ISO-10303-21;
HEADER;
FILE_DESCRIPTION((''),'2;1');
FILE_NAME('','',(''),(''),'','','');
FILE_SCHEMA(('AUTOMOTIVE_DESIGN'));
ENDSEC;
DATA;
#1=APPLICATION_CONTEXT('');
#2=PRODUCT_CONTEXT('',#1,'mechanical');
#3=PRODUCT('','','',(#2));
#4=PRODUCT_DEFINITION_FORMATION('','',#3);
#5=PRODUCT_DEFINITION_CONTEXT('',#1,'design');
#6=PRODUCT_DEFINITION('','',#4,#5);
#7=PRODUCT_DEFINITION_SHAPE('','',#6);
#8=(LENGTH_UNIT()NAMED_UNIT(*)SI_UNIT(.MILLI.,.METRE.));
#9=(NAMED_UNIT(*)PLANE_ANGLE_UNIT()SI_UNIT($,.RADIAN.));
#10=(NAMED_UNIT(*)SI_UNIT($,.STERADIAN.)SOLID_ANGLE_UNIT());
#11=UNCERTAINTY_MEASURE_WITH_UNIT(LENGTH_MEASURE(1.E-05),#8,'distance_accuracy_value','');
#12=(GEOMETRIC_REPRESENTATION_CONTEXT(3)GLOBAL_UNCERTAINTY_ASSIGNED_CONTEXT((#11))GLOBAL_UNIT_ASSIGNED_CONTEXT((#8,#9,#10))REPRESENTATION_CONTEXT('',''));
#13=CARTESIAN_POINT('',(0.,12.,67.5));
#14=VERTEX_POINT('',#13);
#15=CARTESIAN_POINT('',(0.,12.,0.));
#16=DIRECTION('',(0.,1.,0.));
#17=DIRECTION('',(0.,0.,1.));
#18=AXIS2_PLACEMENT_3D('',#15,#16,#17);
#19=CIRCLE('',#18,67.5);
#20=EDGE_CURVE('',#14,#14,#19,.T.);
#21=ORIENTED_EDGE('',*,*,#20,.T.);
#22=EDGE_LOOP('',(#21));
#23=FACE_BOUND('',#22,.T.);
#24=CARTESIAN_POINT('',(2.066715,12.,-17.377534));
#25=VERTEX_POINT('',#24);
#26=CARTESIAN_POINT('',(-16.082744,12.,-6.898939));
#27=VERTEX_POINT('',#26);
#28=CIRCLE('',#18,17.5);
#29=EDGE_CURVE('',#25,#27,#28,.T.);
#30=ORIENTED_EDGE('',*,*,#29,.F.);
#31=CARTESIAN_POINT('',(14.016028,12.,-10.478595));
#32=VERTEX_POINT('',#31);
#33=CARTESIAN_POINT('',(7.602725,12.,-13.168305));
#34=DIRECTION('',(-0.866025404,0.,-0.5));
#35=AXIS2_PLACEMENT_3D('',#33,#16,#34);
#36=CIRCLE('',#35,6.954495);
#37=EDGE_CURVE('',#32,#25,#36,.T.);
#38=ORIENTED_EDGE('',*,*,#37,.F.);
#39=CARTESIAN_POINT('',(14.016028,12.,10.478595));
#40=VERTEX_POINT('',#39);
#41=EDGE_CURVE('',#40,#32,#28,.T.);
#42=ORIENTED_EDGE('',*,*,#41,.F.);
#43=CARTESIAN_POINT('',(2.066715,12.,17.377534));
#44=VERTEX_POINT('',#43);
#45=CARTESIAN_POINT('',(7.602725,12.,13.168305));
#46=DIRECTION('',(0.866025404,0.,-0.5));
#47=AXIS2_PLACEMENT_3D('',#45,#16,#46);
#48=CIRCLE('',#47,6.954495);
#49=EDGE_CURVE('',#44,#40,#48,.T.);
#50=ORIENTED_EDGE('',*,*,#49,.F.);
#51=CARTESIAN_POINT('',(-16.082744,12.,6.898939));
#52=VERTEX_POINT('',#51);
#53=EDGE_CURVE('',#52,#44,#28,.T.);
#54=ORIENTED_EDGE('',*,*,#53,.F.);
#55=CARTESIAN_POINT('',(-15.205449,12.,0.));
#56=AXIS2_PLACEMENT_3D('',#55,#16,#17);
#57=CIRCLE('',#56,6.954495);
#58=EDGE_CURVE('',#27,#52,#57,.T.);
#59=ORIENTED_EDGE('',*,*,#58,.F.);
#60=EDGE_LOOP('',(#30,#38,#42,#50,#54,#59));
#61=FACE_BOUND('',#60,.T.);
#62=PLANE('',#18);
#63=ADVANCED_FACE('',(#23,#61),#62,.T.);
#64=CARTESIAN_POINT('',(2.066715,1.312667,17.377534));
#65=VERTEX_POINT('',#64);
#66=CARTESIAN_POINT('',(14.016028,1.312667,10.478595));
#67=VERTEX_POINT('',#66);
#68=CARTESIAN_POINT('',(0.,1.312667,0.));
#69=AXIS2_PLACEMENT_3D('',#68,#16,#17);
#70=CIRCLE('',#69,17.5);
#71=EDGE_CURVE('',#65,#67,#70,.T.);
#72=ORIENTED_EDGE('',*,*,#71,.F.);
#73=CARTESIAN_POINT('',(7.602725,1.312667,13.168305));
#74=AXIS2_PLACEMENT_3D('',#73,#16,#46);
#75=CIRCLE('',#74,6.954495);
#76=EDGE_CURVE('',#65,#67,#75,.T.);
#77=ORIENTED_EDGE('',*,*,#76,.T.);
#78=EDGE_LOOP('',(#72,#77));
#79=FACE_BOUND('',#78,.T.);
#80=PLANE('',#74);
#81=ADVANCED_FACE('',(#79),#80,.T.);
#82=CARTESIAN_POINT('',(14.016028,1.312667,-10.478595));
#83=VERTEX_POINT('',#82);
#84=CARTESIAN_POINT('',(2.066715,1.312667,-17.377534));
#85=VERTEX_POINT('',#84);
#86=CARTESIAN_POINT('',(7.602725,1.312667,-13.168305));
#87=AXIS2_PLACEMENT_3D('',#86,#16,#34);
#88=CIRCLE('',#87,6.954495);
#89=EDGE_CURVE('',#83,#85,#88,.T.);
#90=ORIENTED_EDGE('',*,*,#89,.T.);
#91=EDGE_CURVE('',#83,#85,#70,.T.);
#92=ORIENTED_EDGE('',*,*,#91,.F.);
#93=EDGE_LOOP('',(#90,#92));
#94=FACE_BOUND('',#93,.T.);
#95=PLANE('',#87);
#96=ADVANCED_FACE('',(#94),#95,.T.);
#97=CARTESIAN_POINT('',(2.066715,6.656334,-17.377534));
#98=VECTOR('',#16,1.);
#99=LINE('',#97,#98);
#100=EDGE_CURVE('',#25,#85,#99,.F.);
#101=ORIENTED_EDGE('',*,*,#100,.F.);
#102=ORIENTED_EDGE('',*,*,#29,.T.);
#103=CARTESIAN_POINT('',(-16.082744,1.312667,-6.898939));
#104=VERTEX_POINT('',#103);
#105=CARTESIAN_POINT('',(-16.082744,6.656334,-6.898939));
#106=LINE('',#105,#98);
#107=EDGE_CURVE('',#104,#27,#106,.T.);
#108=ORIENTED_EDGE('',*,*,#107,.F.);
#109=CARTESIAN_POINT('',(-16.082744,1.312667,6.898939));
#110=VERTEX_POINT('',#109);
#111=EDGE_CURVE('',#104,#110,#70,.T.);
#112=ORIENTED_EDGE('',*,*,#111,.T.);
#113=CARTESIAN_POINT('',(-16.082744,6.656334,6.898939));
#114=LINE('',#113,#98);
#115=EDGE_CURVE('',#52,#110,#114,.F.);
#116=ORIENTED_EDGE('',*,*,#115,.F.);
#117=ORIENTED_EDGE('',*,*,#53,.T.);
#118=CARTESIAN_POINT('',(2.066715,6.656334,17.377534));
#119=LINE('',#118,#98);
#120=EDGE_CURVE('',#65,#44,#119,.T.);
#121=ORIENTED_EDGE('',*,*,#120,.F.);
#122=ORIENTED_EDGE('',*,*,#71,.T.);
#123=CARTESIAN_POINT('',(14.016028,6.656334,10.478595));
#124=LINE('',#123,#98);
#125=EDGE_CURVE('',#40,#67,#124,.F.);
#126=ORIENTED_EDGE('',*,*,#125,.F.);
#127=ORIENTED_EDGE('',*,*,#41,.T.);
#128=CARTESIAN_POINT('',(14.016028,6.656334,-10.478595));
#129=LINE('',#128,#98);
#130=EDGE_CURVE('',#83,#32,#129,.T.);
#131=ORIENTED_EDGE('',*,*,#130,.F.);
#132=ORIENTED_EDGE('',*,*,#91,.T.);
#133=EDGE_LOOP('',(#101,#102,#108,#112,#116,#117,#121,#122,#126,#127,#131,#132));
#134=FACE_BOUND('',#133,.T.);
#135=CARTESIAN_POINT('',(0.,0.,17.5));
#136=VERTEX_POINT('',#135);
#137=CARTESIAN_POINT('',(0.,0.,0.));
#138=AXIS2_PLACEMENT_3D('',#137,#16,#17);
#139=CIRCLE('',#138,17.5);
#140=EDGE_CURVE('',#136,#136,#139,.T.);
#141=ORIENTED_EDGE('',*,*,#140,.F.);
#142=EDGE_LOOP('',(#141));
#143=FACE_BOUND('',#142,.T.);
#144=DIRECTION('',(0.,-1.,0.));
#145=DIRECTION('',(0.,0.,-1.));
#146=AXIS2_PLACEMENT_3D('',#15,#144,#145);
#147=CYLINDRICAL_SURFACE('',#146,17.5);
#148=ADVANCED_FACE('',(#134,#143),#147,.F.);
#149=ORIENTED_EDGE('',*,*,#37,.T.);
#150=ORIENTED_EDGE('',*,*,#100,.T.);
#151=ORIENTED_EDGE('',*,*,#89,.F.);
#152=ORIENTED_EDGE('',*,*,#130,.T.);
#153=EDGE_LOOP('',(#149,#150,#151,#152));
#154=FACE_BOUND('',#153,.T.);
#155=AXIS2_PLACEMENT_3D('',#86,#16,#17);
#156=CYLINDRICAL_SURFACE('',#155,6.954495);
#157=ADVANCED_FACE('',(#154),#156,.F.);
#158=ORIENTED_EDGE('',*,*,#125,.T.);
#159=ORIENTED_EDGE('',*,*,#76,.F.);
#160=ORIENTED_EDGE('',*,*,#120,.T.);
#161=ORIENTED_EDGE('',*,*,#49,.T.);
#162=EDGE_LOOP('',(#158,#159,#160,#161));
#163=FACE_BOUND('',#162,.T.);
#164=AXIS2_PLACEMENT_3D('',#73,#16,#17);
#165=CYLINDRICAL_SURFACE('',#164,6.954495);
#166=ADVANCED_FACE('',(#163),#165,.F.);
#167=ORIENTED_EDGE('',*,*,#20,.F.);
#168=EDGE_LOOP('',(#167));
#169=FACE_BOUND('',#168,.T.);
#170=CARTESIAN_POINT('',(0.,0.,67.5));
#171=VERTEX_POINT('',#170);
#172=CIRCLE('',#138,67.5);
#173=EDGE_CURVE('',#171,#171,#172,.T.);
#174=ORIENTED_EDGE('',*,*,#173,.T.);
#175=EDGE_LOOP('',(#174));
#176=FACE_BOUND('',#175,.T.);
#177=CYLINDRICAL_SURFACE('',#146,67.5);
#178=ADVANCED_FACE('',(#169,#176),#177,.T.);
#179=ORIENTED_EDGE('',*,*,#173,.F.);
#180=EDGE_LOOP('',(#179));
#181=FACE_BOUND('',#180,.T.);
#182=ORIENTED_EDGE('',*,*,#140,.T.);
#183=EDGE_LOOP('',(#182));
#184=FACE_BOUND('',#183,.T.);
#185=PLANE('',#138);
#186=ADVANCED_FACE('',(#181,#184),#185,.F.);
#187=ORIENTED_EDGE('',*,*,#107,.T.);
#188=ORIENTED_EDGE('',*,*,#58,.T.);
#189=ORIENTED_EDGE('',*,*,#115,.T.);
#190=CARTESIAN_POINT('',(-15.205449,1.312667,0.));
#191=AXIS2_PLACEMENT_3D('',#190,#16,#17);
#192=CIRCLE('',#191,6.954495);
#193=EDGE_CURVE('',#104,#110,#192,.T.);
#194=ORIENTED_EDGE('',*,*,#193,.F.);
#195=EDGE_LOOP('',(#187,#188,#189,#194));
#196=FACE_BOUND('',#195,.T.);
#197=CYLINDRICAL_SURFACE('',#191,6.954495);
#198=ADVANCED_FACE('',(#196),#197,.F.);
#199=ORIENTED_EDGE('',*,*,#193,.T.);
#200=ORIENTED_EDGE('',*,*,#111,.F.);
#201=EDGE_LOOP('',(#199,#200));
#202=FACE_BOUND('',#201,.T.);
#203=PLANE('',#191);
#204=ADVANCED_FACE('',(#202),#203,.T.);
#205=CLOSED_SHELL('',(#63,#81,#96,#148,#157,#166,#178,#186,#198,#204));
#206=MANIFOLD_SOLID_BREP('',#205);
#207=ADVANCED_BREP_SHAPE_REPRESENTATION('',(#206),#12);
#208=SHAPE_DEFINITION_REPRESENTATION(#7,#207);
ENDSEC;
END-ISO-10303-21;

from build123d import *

# Parameters (mm, degrees)
SKETCH1_R           = 67.5
BOSS_EXTRUDE1_DEPTH = 12
SKETCH2_R           = 17.5
CUT_EXTRUDE1_DEPTH  = 97.210706265
SKETCH3_R           = 6.954495444
CUT_EXTRUDE2_DEPTH  = 10.687332769
CIRPATTERN1_COUNT   = 3


with BuildPart() as part:
    # Sketch1 → Boss-Extrude1 (new body)
    with BuildSketch(Plane(origin=(0, 0, 0), x_dir=(1, 0, 0), z_dir=(0, 1, 0))):
        Circle(SKETCH1_R)
    extrude(amount=BOSS_EXTRUDE1_DEPTH)

    # Sketch2 → Cut-Extrude1 (cut, through all)
    with BuildSketch(Plane(origin=(0, 0, 0), x_dir=(1, 0, 0), z_dir=(0, 1, 0))):
        Circle(SKETCH2_R)
    extrude(amount=CUT_EXTRUDE1_DEPTH, mode=Mode.SUBTRACT)

    # Sketch3 → Cut-Extrude2 (cut)
    with BuildSketch(Plane(origin=(0, 12, 0), x_dir=(1, 0, 0), z_dir=(0, 1, 0))):
        with Locations((-15.205449086, 0)):
            Circle(SKETCH3_R)
    cut_extrude2 = extrude(amount=-CUT_EXTRUDE2_DEPTH, mode=Mode.SUBTRACT)

    # CirPattern1: Cut-Extrude2 ×3 about axis
    cirpattern1_axis = Axis((0, 0, 0), (0, 1, 0))
    for i in range(1, CIRPATTERN1_COUNT):
        add(cut_extrude2.rotate(cirpattern1_axis, i * 360 / CIRPATTERN1_COUNT), mode=Mode.SUBTRACT)


solid = part.part
